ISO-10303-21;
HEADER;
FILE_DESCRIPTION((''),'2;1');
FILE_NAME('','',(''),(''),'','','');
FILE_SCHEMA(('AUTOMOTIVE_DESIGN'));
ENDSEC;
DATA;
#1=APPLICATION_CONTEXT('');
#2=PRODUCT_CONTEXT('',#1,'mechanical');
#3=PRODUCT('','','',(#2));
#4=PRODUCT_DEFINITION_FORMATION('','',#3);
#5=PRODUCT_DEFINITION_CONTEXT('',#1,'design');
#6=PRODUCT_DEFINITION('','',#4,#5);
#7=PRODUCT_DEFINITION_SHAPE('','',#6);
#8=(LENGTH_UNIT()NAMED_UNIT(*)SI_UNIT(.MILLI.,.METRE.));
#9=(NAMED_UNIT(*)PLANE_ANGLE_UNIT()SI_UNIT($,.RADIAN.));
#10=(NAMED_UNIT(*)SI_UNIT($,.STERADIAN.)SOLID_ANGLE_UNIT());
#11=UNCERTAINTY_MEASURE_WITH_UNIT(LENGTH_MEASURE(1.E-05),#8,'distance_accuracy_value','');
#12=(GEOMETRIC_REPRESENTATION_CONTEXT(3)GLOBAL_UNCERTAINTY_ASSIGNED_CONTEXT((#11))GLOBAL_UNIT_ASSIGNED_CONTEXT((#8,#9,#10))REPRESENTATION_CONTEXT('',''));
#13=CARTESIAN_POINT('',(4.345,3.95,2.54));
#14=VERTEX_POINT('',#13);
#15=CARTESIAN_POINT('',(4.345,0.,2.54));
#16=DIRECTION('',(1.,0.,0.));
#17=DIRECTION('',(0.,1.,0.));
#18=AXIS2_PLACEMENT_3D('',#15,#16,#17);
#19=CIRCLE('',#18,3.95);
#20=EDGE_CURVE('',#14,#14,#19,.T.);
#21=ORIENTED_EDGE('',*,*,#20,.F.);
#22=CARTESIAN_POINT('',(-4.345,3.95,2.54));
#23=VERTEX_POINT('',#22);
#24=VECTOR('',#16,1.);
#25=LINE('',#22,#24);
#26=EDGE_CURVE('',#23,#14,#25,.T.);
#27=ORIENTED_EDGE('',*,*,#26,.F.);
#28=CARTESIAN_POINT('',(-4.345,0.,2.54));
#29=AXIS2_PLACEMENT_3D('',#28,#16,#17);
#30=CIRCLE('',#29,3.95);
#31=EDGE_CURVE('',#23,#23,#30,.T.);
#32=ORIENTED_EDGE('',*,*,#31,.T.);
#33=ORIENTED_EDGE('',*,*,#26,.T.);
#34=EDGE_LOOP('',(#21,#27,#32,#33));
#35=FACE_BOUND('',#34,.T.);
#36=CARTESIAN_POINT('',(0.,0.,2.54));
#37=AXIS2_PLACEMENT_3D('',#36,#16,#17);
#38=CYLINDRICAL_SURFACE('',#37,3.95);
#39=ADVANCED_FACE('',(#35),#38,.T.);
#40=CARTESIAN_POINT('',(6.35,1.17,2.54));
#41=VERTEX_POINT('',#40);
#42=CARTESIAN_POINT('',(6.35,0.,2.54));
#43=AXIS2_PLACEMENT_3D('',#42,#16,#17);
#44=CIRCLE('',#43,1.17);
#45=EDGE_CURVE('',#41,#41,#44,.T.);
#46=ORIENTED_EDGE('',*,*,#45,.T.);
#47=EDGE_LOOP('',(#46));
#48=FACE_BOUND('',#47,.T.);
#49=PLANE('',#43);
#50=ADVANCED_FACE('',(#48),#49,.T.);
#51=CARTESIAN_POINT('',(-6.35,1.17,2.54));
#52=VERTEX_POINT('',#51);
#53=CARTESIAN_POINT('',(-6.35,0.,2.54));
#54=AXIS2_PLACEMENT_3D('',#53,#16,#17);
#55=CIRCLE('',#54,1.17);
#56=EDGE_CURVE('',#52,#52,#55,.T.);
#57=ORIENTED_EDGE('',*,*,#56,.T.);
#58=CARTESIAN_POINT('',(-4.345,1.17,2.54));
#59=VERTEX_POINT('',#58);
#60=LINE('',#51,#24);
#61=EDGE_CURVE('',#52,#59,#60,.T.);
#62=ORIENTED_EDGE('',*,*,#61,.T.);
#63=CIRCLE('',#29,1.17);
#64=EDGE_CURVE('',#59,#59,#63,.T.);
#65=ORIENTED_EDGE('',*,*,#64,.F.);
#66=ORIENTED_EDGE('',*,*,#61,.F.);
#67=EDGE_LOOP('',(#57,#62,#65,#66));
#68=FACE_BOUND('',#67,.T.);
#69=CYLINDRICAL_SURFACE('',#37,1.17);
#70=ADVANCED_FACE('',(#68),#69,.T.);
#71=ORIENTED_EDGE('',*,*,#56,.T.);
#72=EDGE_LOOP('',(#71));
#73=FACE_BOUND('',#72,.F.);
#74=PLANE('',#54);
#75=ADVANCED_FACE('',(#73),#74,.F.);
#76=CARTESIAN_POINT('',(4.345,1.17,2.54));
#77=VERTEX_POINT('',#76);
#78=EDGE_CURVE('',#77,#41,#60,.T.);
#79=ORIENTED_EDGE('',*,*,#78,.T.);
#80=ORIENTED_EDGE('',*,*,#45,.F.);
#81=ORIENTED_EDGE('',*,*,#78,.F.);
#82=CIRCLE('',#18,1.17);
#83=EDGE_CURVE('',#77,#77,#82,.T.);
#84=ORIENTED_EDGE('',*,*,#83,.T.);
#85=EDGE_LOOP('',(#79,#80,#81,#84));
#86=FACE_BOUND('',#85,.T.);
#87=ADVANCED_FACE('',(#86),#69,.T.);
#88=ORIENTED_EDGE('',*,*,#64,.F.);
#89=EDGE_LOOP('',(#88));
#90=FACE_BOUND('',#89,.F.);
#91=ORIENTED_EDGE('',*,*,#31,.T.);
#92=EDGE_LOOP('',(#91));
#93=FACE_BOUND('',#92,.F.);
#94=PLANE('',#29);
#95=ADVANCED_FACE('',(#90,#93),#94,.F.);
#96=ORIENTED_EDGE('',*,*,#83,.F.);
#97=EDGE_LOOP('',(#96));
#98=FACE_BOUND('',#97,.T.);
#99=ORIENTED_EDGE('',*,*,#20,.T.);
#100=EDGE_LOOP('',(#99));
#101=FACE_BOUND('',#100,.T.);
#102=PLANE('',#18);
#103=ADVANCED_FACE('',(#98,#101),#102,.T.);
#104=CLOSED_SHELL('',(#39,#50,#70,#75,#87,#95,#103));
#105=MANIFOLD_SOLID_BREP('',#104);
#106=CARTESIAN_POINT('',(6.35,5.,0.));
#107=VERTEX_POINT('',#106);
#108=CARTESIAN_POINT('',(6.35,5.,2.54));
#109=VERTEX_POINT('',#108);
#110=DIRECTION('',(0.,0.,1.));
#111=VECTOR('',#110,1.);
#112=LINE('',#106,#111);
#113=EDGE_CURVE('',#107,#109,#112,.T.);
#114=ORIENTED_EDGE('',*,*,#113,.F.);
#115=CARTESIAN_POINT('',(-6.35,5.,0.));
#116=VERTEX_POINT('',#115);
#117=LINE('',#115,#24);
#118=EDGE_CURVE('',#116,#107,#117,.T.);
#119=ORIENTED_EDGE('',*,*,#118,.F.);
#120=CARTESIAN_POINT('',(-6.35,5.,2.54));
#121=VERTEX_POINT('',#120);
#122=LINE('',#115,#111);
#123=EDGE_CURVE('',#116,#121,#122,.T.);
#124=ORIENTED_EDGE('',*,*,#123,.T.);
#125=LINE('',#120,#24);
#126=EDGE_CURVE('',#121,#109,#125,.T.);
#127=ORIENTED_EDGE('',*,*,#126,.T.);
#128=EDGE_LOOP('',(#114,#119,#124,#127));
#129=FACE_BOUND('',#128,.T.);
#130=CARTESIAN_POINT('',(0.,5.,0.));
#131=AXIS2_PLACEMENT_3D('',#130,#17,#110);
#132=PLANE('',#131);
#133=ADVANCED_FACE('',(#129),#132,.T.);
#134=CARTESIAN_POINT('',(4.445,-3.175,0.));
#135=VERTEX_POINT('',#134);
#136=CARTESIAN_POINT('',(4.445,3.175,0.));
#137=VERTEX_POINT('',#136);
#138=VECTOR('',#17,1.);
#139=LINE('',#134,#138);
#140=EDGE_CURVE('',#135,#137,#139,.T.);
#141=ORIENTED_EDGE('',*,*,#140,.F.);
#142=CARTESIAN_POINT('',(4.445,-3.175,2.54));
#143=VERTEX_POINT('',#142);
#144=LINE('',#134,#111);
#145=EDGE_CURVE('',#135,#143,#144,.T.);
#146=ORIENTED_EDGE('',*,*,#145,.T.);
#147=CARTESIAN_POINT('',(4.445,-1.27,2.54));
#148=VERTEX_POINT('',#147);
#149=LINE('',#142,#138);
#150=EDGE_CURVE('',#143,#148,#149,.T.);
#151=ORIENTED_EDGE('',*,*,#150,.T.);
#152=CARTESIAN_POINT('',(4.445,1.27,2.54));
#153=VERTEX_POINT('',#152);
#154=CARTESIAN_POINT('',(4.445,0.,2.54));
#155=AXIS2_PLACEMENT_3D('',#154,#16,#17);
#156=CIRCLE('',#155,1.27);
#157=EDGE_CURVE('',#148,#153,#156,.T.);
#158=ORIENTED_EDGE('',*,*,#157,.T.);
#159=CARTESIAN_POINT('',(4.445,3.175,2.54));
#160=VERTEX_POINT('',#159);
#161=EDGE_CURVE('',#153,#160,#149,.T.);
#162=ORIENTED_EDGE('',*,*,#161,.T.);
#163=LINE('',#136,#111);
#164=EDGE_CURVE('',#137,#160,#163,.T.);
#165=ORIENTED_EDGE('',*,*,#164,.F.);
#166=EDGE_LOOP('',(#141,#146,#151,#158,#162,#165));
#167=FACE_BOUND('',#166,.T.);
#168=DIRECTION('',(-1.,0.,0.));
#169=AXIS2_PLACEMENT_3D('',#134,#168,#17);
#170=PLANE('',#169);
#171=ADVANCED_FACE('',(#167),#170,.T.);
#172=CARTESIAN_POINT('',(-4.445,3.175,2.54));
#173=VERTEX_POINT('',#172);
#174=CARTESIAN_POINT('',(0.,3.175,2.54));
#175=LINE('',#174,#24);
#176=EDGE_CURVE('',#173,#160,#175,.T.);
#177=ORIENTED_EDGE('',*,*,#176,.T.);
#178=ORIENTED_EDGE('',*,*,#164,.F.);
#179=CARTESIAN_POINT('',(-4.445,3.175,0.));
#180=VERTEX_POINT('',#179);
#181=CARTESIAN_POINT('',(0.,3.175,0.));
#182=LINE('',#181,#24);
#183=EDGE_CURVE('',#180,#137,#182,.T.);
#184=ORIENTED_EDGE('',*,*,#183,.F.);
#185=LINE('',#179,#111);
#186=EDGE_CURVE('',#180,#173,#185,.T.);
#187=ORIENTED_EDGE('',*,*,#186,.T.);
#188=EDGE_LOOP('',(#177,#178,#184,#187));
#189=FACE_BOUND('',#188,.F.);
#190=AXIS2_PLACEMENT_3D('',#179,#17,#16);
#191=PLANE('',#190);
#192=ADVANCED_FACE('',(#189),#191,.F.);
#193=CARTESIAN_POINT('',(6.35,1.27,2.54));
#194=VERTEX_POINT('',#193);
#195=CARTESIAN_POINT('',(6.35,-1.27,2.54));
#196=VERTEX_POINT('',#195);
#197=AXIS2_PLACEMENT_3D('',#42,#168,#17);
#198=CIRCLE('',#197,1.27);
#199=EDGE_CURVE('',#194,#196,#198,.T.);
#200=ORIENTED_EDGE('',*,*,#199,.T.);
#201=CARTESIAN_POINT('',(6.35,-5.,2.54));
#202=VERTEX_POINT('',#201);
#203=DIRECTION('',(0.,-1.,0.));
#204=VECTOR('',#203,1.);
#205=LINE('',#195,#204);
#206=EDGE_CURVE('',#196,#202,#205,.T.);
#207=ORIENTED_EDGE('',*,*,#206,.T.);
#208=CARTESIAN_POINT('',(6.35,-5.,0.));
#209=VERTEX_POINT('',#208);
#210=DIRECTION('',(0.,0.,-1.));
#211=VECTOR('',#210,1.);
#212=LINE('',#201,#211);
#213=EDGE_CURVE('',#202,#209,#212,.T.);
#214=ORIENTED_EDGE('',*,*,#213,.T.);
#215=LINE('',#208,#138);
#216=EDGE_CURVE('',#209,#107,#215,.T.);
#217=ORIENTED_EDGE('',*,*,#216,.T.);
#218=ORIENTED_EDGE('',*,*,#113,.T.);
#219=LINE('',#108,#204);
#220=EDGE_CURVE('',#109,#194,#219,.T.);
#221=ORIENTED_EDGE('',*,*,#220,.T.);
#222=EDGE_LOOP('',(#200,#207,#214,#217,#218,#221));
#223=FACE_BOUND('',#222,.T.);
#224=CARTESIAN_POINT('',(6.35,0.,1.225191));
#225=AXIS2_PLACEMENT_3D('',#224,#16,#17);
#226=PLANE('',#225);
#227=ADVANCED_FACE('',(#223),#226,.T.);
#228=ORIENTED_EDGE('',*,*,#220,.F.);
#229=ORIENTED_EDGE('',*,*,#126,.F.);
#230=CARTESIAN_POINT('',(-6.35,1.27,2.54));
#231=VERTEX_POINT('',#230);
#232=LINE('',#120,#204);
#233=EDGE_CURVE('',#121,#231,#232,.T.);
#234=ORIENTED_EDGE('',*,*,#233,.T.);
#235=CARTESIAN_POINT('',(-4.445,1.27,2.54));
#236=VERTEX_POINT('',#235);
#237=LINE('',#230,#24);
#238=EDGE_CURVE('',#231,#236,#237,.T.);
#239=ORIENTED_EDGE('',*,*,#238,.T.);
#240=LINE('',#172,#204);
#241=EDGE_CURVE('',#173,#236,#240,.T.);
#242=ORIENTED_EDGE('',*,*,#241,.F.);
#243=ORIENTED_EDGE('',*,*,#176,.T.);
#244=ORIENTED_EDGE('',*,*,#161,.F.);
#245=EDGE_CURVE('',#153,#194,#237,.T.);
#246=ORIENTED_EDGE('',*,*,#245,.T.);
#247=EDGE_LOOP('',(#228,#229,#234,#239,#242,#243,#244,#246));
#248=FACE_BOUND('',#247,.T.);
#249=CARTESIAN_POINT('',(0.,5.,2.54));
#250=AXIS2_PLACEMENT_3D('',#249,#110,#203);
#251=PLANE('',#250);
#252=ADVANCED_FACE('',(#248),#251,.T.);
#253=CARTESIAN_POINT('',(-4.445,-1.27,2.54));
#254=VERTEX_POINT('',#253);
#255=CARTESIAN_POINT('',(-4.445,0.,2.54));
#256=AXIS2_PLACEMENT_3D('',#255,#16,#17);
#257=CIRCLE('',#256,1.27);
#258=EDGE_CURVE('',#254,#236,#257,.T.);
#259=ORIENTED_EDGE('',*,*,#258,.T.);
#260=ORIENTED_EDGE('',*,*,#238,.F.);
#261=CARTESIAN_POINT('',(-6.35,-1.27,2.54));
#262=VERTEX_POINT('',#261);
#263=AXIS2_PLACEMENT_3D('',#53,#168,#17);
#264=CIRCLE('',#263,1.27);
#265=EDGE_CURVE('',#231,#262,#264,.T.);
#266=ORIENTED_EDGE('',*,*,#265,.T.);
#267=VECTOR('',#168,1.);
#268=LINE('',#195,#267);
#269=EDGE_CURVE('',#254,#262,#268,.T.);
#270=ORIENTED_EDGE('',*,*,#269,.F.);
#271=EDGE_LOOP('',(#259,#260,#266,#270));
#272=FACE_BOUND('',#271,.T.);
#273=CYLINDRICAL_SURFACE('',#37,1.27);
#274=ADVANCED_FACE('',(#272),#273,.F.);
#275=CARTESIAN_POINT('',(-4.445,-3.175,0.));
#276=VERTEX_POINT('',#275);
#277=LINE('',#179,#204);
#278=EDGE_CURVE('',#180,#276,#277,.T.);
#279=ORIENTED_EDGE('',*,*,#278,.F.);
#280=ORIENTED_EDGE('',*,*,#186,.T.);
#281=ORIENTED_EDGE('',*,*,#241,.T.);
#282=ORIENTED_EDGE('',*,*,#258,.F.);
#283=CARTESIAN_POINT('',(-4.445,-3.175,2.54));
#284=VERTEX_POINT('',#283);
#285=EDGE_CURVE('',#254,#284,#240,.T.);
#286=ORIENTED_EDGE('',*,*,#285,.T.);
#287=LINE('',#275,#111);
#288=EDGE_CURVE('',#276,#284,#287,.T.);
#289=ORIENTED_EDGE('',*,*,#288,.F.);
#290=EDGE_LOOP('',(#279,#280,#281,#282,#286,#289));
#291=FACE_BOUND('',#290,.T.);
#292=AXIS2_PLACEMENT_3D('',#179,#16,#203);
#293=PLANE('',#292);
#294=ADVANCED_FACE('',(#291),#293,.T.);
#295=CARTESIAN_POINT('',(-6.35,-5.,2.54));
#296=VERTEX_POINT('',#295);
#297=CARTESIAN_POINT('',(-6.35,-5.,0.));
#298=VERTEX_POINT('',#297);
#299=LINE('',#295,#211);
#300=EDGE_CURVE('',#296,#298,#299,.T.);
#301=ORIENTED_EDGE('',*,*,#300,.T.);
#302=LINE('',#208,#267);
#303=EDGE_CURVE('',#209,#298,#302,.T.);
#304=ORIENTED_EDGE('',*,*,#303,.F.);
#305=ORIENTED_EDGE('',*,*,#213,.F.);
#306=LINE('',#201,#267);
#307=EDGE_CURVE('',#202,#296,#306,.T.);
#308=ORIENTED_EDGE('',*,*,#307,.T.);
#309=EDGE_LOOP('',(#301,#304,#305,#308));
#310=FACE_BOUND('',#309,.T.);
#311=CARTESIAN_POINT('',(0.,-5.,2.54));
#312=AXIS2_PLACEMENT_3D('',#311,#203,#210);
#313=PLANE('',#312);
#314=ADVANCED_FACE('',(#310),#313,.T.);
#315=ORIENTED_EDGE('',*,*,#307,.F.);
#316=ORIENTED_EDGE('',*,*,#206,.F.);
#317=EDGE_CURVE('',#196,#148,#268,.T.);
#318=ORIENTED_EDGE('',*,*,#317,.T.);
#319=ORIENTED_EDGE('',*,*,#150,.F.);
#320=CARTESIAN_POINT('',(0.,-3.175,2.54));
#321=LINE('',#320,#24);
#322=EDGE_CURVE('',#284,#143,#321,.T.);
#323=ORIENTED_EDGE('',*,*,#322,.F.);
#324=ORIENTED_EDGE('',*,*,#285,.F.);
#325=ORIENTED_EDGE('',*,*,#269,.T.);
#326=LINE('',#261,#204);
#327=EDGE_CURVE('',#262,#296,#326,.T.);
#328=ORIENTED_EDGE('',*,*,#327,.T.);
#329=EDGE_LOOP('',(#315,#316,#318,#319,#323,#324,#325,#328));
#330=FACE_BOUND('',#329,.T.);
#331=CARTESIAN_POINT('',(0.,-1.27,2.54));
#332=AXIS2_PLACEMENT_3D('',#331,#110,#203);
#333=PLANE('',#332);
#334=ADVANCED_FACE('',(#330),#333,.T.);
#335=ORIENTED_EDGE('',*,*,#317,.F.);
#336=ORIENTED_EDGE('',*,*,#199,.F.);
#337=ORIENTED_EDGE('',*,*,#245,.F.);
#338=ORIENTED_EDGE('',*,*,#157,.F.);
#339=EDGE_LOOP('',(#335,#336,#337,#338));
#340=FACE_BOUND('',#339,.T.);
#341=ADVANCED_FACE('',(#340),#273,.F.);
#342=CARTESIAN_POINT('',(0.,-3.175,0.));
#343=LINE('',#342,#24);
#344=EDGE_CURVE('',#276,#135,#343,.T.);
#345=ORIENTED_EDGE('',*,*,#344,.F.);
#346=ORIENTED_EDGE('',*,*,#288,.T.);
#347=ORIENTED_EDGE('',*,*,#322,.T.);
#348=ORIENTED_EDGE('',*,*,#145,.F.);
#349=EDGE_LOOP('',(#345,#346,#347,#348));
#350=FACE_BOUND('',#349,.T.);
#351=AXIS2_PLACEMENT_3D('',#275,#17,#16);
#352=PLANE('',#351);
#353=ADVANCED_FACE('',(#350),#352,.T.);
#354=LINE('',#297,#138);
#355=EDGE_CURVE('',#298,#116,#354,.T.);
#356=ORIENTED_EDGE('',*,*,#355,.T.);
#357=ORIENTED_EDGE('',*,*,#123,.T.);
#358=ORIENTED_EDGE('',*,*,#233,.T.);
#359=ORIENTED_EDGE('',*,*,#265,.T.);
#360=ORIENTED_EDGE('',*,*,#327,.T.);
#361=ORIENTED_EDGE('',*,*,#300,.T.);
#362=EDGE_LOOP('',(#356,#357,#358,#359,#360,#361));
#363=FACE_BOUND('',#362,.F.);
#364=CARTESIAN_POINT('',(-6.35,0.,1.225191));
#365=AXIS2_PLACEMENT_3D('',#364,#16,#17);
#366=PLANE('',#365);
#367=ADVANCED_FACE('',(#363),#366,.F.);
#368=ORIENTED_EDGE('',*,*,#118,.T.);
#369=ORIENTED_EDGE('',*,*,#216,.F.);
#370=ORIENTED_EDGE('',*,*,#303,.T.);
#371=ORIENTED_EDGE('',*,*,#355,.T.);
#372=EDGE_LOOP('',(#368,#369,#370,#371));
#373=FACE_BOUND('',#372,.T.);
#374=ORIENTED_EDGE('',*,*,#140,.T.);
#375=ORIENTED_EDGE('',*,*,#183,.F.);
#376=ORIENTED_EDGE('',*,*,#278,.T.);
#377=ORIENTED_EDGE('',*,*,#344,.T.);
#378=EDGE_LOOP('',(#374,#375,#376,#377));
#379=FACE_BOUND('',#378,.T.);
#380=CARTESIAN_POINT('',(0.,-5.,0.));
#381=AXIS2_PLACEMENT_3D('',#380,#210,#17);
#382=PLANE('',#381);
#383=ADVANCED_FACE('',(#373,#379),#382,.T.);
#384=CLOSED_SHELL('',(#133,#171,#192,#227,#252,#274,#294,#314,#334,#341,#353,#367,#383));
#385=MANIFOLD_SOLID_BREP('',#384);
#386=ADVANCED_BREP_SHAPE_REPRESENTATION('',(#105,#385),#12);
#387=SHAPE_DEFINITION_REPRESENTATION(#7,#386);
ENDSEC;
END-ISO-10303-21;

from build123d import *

# Parameters (mm, degrees)
F1_DEPTH      = 6.35
F1_DEPTH_BACK = 6.35
F2_W          = 8.89
F2_H          = 1.905
F2_H_2        = 2.54
F3_DEPTH      = 2.54
F4_R          = 1.17
F5_DEPTH      = 6.35
F5_DEPTH_BACK = 6.35
F6_R          = 3.95
F7_DEPTH      = 4.345
F7_DEPTH_BACK = 4.345


with BuildPart() as f1:
    # F0 (on Right) → F1 (new body, two sides)
    with BuildSketch(Plane.YZ) as f1_sk:
        with BuildLine():
            Line((-5, 0), (0, 0))
            Line((0, 0), (5, 0))
            Line((5, 0), (5, 2.54))
            Line((5, 2.54), (1.27, 2.54))
            ThreePointArc((1.27, 2.54), (0, 1.27), (-1.27, 2.54))
            Line((-1.27, 2.54), (-5, 2.54))
            Line((-5, 2.54), (-5, 0))
        make_face()
    extrude(amount=F1_DEPTH)
    extrude(f1_sk.sketch, amount=-F1_DEPTH_BACK)

    # F2 (on Top) → F3 (cut, through all)
    with BuildSketch(Plane.XY):
        with Locations((0, -2.2225)):
            Rectangle(F2_W, F2_H)
        Rectangle(F2_W, F2_H_2)
        with Locations((0, 2.2225)):
            Rectangle(F2_W, F2_H)
    extrude(amount=F3_DEPTH, mode=Mode.SUBTRACT)


with BuildPart() as f5:
    # F4 (on Right) → F5 (new body, two sides)
    with BuildSketch(Plane.YZ) as f5_sk:
        with Locations((0, 2.54)):
            Circle(F4_R)
    extrude(amount=F5_DEPTH)
    extrude(f5_sk.sketch, amount=-F5_DEPTH_BACK)

    # F6 (on Right) → F7 (join, two sides)
    with BuildSketch(Plane.YZ) as f7_sk:
        with Locations((0, 2.54)):
            Circle(F6_R)
    extrude(amount=F7_DEPTH)
    extrude(f7_sk.sketch, amount=-F7_DEPTH_BACK)


solid = Compound([f1.part, f5.part])
